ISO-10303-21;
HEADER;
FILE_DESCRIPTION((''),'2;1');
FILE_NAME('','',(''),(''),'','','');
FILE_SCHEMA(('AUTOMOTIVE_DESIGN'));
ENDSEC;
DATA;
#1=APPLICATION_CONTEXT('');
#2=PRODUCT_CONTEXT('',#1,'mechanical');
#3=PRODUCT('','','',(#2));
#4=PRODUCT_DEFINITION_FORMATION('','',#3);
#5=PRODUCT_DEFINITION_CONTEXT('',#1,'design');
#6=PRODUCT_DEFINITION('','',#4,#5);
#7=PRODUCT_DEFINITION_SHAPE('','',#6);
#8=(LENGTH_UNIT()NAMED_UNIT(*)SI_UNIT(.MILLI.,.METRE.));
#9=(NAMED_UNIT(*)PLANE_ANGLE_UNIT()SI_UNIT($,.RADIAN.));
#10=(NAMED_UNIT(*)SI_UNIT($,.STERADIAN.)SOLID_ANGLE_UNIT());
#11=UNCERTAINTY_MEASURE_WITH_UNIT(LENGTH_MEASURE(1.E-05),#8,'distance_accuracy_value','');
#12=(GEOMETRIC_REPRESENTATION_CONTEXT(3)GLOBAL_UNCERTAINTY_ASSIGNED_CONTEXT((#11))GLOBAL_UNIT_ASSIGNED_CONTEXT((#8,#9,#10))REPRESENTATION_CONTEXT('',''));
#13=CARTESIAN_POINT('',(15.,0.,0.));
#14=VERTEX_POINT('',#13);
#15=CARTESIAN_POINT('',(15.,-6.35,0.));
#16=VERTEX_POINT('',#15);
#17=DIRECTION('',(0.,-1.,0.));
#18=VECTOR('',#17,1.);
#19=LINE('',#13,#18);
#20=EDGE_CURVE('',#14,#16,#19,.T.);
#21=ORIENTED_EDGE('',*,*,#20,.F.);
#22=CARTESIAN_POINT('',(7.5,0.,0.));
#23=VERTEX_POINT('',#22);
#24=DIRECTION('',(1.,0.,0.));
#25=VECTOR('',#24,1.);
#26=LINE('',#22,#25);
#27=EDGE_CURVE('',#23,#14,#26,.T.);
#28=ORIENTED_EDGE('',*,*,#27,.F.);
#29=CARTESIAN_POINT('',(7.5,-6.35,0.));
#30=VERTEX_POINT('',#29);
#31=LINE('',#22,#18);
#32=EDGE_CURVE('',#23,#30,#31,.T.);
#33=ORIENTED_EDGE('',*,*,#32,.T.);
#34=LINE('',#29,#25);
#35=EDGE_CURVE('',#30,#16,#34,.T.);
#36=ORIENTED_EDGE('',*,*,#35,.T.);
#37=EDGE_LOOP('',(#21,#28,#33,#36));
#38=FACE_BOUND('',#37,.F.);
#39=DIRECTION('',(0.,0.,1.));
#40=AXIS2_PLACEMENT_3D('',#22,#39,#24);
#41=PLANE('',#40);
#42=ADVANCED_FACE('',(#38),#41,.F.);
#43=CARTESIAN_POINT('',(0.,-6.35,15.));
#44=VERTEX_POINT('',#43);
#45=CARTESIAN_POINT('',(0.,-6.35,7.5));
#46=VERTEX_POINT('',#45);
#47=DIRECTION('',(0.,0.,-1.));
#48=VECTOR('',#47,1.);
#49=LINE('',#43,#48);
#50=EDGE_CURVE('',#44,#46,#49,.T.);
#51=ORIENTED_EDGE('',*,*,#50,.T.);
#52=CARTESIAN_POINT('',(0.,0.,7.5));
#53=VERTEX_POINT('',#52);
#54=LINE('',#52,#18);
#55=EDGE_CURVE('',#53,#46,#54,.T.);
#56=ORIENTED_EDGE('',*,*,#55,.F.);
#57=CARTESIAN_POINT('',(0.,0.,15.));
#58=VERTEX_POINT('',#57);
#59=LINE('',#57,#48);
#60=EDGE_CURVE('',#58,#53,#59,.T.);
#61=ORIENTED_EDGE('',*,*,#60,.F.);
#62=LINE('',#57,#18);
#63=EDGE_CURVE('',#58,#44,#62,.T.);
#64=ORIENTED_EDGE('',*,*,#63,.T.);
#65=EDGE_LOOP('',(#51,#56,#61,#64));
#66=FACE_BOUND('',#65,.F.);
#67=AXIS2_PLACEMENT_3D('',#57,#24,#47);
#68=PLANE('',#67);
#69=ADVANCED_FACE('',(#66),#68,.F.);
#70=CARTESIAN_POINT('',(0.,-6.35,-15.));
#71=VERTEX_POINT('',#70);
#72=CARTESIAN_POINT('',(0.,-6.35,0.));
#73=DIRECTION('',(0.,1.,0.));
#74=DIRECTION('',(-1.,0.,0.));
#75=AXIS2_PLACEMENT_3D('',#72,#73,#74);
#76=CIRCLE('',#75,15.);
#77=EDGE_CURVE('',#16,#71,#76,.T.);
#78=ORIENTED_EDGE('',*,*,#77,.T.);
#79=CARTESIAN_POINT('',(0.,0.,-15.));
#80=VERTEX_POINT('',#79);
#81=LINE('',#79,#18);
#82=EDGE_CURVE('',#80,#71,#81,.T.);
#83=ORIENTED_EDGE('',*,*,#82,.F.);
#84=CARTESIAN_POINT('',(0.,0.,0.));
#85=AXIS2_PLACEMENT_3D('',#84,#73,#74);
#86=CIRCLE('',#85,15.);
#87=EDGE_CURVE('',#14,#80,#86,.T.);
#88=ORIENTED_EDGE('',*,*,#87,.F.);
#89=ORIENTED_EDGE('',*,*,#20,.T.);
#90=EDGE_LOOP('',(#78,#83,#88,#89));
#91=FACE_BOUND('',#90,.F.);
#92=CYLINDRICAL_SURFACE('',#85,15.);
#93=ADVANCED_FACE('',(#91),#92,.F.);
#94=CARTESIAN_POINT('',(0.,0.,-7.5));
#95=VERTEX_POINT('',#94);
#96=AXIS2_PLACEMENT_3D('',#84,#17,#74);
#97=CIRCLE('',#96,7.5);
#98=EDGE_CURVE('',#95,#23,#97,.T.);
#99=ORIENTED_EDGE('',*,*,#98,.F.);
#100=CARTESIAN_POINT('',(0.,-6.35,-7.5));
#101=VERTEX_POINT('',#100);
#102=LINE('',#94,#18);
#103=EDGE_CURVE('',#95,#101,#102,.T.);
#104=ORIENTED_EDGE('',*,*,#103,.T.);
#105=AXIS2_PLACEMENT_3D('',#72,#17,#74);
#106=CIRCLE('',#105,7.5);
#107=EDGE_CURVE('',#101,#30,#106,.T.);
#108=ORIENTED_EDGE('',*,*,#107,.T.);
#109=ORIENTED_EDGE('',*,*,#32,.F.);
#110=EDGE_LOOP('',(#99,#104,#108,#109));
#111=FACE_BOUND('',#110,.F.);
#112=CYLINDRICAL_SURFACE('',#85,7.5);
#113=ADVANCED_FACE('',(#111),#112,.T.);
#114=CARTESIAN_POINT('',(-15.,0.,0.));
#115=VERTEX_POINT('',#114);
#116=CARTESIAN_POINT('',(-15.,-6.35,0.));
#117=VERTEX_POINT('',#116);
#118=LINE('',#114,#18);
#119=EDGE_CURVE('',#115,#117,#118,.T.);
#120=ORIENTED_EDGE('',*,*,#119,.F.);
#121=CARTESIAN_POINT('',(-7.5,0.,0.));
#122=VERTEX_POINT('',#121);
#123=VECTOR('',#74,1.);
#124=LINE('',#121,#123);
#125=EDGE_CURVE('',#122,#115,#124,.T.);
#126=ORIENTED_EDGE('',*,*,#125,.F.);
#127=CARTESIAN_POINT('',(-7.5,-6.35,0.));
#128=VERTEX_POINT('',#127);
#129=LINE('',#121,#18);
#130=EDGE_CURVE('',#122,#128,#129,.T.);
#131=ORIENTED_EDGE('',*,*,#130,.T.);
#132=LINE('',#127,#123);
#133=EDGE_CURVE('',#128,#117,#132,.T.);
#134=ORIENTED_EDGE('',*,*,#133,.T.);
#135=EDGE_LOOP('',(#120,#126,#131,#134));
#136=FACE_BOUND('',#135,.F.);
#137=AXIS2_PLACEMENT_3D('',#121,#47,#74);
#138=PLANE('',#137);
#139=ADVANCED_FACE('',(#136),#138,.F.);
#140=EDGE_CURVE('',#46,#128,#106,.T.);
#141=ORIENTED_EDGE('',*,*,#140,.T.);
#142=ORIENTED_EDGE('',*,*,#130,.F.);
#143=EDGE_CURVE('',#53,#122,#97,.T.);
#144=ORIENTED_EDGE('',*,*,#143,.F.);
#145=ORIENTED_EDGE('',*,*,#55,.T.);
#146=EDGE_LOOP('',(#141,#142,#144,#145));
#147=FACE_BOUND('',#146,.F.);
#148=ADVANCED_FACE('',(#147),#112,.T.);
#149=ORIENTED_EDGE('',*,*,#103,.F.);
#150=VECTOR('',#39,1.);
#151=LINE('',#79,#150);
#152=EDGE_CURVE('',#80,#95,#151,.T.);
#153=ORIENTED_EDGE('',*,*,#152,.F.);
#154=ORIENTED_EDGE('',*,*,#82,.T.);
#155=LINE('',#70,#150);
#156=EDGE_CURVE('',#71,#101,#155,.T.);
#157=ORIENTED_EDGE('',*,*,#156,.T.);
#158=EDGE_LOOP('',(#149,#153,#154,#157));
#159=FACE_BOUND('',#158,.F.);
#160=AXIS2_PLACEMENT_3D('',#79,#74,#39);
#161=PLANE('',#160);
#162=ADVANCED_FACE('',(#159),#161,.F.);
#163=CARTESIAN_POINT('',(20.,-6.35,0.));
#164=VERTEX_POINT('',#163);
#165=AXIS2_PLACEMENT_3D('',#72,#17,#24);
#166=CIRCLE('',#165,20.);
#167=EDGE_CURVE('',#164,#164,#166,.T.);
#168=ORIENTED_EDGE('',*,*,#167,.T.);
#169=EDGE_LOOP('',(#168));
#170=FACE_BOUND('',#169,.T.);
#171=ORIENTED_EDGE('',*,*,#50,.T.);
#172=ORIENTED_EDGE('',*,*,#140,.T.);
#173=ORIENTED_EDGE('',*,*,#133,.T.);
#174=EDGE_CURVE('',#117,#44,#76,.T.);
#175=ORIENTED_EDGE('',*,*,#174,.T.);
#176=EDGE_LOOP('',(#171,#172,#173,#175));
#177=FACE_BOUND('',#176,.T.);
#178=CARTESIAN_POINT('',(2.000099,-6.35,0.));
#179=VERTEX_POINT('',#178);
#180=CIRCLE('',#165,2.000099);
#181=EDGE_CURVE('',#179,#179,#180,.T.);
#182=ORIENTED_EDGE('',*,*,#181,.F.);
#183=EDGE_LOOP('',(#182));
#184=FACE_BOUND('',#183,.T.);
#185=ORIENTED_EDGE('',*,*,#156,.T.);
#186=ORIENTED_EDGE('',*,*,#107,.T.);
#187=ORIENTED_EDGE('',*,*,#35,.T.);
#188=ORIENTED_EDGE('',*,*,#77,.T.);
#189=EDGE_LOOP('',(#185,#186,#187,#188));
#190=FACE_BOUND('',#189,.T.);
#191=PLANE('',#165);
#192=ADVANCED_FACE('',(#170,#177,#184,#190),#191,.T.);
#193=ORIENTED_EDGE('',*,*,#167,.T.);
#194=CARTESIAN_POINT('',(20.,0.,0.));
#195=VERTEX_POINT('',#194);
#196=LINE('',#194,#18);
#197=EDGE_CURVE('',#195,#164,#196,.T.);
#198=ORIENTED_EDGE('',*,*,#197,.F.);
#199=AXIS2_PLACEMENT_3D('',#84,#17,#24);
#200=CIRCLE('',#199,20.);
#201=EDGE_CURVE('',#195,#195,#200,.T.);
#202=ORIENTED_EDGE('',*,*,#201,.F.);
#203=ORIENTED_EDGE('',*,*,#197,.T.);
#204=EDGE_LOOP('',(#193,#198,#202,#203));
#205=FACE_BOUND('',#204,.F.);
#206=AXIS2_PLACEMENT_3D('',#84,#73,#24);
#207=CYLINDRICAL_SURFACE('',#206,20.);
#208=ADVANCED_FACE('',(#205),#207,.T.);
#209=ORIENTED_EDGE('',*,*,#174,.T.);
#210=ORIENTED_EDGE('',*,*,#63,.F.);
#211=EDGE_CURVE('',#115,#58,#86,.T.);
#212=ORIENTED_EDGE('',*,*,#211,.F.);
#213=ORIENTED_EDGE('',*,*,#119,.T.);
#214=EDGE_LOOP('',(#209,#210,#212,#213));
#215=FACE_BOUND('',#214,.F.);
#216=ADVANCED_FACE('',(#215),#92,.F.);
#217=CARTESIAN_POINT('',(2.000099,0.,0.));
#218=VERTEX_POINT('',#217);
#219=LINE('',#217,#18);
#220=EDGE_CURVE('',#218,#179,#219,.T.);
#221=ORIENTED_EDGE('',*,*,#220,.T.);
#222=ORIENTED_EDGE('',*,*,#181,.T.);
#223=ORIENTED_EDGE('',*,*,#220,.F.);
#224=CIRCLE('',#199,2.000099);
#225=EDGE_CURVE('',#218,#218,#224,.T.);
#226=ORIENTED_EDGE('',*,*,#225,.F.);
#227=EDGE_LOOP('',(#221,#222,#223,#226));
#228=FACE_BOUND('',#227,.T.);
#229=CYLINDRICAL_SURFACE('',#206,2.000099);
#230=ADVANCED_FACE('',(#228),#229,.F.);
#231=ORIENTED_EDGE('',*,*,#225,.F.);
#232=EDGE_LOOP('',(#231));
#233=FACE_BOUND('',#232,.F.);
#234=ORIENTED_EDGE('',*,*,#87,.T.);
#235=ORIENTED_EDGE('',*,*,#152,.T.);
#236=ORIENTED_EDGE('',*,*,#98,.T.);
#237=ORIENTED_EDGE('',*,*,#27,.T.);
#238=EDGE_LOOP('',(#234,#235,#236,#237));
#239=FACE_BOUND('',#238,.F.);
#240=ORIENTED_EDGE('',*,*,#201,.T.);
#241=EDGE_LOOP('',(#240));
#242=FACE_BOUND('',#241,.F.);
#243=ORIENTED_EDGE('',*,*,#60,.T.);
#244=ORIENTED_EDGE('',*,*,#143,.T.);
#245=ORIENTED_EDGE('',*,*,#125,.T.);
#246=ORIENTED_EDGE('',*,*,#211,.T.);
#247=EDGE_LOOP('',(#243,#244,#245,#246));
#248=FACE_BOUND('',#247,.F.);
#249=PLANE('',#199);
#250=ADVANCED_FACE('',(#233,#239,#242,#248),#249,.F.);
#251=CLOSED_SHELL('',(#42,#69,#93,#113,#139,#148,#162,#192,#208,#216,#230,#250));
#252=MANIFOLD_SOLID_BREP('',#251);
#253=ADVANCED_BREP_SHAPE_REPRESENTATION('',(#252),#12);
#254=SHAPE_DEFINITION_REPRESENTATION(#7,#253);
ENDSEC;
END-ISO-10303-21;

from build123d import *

# Parameters (mm, degrees)
F0_R     = 20
F0_R_2   = 2.0000994159
F1_DEPTH = 6.35


# Not quite as in the source:
# - a length typed as a fraction of an inch, garbled in the dataset ("3 / 203.2 mm" for 3/8 in), is restored


with BuildPart() as f1:
    # F0 (on Front) → F1 (new body)
    with BuildSketch(Plane.XZ):
        Circle(F0_R)
        with BuildLine():
            ThreePointArc((0, 15), (10.6066017178, 10.6066017178), (15, 0))
            ThreePointArc((15, 0), (10.6066017178, -10.6066017178), (0, -15))
            ThreePointArc((0, -15), (-10.6066017178, -10.6066017178), (-15, 0))
            ThreePointArc((-15, 0), (-10.6066017178, 10.6066017178), (0, 15))
        make_face(mode=Mode.SUBTRACT)
        with BuildLine():
            ThreePointArc((0, -7.5), (5.3033008589, -5.3033008589), (7.5, 0))
            ThreePointArc((7.5, 0), (5.3033008589, 5.3033008589), (0, 7.5))
            ThreePointArc((0, 7.5), (-5.3033008589, 5.3033008589), (-7.5, 0))
            ThreePointArc((-7.5, 0), (-5.3033008589, -5.3033008589), (0, -7.5))
        make_face()
        Circle(F0_R_2, mode=Mode.SUBTRACT)
        with BuildLine():
            ThreePointArc((-15, 0), (-10.6066017178, -10.6066017178), (0, -15))
            Line((0, -15), (0, -7.5))
            ThreePointArc((0, -7.5), (-5.3033008589, -5.3033008589), (-7.5, 0))
            Line((-7.5, 0), (-15, 0))
        make_face()
        with BuildLine():
            Line((7.5, 0), (15, 0))
            ThreePointArc((15, 0), (10.6066017178, 10.6066017178), (0, 15))
            Line((0, 15), (0, 7.5))
            ThreePointArc((0, 7.5), (5.3033008589, 5.3033008589), (7.5, 0))
        make_face()
    extrude(amount=F1_DEPTH)


solid = f1.part
